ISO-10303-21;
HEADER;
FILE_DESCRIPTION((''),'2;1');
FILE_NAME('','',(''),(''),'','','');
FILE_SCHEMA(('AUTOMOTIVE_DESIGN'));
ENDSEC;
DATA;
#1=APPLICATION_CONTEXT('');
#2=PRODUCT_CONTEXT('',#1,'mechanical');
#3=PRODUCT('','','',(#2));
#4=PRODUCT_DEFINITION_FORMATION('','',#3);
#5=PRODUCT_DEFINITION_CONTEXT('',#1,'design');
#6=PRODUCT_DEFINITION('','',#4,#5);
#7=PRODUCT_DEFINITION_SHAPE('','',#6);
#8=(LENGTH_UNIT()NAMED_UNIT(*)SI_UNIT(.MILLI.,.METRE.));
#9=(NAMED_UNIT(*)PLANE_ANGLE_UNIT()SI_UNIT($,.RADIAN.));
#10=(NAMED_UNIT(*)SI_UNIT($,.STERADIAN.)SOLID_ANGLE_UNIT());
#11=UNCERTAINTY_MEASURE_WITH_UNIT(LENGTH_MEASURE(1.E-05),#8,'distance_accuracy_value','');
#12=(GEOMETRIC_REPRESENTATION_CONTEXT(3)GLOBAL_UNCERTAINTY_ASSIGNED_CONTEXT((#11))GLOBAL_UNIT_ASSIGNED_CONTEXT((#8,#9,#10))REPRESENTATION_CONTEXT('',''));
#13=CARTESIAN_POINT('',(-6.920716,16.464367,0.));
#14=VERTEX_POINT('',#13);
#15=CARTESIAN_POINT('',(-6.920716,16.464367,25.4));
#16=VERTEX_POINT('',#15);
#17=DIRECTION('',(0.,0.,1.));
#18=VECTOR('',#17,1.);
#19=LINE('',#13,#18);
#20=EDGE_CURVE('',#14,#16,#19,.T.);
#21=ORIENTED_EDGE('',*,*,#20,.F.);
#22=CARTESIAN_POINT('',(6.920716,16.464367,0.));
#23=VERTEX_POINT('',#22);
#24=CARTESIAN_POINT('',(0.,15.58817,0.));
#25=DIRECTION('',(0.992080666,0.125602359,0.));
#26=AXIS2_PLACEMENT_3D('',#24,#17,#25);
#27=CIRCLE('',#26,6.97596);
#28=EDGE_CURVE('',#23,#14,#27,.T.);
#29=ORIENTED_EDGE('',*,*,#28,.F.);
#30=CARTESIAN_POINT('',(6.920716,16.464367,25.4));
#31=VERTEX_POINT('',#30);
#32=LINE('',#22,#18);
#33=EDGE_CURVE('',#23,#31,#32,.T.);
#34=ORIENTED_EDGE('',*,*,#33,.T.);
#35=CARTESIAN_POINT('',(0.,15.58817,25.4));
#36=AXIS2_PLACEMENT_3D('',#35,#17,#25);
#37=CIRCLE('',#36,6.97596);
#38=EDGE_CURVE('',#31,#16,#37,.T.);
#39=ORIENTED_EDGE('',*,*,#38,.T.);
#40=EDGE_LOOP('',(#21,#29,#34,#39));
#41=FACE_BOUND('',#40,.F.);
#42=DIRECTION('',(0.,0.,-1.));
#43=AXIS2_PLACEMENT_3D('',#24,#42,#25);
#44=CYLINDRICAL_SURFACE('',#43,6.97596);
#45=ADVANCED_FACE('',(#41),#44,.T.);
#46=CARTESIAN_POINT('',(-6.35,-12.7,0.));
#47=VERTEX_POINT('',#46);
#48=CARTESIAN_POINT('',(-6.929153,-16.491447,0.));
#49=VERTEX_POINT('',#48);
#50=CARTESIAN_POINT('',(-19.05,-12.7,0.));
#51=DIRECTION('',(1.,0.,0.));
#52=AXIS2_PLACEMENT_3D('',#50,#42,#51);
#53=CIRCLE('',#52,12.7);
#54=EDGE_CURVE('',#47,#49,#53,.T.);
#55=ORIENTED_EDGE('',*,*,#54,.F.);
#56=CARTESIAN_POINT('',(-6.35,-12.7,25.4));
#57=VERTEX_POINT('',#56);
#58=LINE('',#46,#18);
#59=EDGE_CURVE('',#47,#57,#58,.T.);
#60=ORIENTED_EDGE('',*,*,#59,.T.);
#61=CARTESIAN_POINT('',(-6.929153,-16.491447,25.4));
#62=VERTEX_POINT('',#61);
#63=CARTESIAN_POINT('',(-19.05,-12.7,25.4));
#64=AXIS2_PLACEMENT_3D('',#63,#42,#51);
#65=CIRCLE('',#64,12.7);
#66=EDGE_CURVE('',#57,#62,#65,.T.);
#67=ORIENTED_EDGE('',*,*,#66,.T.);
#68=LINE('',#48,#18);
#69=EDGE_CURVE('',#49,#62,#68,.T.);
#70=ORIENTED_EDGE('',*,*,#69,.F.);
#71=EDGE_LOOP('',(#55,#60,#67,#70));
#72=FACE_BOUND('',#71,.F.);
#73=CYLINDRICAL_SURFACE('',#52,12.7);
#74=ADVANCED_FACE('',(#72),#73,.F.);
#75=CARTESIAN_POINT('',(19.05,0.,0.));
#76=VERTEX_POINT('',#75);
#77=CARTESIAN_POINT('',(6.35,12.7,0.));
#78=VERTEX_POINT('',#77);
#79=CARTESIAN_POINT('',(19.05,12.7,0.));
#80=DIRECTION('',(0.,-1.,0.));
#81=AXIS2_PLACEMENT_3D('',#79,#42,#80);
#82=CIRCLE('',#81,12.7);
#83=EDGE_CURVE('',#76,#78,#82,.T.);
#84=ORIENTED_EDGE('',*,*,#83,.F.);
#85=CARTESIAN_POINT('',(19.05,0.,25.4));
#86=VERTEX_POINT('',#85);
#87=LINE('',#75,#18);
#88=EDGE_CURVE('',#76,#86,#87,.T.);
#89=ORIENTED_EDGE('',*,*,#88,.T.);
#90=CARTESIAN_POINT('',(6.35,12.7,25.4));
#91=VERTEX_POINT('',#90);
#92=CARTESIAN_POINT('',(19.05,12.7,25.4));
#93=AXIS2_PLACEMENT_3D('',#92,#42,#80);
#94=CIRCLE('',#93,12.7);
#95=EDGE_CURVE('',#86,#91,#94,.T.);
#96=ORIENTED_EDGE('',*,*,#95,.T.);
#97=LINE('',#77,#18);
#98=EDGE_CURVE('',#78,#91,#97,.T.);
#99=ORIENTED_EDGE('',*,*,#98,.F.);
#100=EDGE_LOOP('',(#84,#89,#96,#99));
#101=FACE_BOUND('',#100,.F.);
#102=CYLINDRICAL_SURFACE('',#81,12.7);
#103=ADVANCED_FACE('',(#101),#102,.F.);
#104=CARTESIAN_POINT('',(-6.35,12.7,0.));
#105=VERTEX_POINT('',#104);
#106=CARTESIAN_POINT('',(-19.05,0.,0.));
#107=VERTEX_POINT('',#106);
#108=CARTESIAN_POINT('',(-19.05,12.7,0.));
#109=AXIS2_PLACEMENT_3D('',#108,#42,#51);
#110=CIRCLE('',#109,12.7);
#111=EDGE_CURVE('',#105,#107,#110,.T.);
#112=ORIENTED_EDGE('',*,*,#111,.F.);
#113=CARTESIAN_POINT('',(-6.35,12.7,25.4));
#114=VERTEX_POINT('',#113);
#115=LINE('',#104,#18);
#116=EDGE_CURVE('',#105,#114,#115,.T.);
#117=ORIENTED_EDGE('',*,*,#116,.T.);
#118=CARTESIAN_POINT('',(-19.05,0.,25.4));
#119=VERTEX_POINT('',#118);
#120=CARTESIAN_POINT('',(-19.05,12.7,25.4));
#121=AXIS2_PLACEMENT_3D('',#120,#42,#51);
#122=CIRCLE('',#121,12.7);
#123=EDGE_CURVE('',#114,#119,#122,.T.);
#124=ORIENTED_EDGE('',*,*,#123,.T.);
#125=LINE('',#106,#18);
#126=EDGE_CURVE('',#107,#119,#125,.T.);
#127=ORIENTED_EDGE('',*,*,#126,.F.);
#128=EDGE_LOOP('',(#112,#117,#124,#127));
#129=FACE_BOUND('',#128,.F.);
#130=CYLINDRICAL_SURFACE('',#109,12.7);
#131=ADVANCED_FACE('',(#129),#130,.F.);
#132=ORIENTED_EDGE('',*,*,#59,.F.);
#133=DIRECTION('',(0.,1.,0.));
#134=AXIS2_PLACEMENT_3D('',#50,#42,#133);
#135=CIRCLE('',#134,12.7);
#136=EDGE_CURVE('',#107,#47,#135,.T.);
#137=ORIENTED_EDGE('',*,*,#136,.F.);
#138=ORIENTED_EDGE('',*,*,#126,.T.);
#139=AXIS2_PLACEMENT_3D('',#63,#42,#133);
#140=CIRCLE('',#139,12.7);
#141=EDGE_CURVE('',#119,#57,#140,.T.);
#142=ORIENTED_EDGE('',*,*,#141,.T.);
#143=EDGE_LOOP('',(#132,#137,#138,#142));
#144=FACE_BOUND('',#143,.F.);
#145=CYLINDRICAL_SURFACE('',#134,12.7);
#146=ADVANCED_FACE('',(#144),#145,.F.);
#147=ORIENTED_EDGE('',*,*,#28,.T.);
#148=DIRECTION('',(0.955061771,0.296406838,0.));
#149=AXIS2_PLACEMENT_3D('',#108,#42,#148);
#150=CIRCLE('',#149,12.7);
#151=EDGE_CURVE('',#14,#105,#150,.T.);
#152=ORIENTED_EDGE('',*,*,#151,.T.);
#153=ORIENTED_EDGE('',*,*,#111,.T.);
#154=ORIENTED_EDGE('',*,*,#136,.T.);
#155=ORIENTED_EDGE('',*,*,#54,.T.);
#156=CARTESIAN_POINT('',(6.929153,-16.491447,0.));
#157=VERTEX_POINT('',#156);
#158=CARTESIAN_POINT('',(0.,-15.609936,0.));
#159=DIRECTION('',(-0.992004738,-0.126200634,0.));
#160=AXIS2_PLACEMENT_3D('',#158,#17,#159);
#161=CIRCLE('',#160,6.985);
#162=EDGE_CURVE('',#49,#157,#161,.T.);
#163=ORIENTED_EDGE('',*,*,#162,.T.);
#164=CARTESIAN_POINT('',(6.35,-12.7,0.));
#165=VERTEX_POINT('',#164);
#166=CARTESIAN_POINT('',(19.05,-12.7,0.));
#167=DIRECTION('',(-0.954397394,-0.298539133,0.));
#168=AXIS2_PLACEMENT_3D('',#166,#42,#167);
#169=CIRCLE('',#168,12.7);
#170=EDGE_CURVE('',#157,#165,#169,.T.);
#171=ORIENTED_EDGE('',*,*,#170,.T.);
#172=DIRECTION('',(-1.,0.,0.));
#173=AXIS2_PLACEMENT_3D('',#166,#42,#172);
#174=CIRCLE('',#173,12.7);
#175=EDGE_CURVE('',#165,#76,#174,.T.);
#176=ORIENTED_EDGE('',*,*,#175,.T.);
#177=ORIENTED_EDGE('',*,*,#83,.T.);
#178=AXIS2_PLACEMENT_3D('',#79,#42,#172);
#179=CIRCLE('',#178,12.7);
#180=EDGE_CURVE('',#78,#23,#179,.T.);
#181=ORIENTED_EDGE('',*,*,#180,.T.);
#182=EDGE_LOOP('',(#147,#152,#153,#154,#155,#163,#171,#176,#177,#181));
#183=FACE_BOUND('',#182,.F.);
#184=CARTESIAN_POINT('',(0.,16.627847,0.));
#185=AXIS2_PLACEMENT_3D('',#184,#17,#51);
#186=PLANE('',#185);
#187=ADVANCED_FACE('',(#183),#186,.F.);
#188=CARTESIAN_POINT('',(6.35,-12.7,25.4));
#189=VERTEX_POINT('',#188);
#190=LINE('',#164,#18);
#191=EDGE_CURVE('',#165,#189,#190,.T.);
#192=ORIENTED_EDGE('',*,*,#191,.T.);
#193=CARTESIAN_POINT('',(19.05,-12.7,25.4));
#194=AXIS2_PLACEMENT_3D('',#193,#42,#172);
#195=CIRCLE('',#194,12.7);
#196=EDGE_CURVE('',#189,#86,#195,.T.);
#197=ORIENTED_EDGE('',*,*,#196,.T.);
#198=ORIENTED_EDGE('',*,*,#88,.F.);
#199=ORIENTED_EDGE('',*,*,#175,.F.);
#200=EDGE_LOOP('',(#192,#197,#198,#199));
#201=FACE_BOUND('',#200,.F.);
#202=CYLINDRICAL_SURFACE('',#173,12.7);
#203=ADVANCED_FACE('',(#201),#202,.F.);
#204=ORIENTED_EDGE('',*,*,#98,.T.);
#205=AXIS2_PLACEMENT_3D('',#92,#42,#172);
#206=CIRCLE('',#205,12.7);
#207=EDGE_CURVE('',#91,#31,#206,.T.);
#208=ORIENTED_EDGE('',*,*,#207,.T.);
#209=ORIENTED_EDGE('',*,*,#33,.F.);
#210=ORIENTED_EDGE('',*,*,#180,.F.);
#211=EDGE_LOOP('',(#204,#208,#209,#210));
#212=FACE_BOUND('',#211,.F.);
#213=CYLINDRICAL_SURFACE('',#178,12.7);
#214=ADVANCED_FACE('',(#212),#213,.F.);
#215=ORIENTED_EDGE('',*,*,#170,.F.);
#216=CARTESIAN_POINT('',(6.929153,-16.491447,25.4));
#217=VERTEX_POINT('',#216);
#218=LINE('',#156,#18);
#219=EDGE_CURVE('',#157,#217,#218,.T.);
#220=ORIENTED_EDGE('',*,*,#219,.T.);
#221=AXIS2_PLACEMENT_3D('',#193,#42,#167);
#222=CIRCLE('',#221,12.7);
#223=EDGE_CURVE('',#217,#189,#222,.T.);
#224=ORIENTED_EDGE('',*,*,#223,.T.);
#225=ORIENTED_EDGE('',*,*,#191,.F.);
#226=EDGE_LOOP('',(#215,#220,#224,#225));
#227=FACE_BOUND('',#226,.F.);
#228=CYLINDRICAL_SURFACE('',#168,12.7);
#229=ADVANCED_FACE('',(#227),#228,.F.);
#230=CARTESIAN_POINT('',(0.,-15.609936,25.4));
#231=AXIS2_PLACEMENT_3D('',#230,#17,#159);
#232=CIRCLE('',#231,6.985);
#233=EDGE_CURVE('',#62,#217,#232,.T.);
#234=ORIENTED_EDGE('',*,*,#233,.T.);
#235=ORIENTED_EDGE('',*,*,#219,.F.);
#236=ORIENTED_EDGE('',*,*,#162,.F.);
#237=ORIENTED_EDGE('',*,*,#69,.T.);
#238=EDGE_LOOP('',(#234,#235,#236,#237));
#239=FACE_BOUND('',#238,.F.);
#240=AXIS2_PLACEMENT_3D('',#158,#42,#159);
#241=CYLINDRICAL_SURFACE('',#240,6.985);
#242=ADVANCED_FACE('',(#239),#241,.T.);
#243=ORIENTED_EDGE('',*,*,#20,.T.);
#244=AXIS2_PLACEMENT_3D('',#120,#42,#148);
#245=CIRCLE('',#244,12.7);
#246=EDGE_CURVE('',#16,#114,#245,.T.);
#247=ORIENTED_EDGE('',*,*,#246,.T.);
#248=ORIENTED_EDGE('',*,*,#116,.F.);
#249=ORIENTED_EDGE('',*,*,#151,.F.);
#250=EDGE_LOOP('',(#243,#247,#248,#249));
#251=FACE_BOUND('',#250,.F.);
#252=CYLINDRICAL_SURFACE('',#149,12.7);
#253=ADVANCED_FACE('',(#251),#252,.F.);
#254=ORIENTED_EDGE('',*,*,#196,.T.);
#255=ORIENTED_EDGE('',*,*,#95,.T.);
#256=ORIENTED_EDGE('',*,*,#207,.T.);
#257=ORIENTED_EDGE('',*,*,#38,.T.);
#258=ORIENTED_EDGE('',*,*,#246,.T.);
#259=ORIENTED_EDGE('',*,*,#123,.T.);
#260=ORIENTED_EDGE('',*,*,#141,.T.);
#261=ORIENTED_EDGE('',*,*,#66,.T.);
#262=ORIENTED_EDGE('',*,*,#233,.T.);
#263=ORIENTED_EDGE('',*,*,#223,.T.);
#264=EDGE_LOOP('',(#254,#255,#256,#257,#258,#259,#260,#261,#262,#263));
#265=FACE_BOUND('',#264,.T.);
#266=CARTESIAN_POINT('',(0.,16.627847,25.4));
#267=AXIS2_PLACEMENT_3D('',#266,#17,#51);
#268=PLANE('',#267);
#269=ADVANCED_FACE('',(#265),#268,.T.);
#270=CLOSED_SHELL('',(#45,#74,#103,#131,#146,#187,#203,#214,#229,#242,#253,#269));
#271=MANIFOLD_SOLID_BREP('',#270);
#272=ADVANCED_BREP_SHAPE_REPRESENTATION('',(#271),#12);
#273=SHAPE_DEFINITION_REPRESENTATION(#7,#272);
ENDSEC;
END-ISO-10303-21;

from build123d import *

# Parameters (mm, degrees)
F1_DEPTH = 25.4


# Not quite as in the source:
# - a feature names something its author has since deleted; it is built from what else it names


with BuildPart() as f1:
    # F0 (on Top) → F1 (new body)
    with BuildSketch(Plane.XY):
        with BuildLine():
            ThreePointArc((-6.920715507, 16.4643668374), (-6.4934894763, 14.6036920626), (-6.35, 12.7))
            Line((-6.35, 12.7), (6.35, 12.7))
            ThreePointArc((6.35, 12.7), (6.4934894763, 14.6036920626), (6.920715507, 16.4643668374))
            ThreePointArc((6.920715507, 16.4643668374), (0, 22.5641302142), (-6.920715507, 16.4643668374))
        make_face()
        with BuildLine():
            Line((6.35, 12.7), (-6.35, 12.7))
            ThreePointArc((-6.35, 12.7), (-10.0697438789, 3.7197438789), (-19.05, 0))
            ThreePointArc((-19.05, 0), (-10.0697438789, -3.7197438789), (-6.35, -12.7))
            Line((-6.35, -12.7), (6.35, -12.7))
            ThreePointArc((6.35, -12.7), (10.0697438789, -3.7197438789), (19.05, 0))
            ThreePointArc((19.05, 0), (10.0697438789, 3.7197438789), (6.35, 12.7))
        make_face()
        with BuildLine():
            Line((6.35, -12.7), (-6.35, -12.7))
            ThreePointArc((-6.35, -12.7), (-6.4956231596, -14.6177127391), (-6.9291530945, -16.4914469919))
            ThreePointArc((-6.9291530945, -16.4914469919), (0, -22.5949355663), (6.9291530945, -16.4914469919))
            ThreePointArc((6.9291530945, -16.4914469919), (6.4956231596, -14.6177127391), (6.35, -12.7))
        make_face()
    extrude(amount=F1_DEPTH)


solid = f1.part
